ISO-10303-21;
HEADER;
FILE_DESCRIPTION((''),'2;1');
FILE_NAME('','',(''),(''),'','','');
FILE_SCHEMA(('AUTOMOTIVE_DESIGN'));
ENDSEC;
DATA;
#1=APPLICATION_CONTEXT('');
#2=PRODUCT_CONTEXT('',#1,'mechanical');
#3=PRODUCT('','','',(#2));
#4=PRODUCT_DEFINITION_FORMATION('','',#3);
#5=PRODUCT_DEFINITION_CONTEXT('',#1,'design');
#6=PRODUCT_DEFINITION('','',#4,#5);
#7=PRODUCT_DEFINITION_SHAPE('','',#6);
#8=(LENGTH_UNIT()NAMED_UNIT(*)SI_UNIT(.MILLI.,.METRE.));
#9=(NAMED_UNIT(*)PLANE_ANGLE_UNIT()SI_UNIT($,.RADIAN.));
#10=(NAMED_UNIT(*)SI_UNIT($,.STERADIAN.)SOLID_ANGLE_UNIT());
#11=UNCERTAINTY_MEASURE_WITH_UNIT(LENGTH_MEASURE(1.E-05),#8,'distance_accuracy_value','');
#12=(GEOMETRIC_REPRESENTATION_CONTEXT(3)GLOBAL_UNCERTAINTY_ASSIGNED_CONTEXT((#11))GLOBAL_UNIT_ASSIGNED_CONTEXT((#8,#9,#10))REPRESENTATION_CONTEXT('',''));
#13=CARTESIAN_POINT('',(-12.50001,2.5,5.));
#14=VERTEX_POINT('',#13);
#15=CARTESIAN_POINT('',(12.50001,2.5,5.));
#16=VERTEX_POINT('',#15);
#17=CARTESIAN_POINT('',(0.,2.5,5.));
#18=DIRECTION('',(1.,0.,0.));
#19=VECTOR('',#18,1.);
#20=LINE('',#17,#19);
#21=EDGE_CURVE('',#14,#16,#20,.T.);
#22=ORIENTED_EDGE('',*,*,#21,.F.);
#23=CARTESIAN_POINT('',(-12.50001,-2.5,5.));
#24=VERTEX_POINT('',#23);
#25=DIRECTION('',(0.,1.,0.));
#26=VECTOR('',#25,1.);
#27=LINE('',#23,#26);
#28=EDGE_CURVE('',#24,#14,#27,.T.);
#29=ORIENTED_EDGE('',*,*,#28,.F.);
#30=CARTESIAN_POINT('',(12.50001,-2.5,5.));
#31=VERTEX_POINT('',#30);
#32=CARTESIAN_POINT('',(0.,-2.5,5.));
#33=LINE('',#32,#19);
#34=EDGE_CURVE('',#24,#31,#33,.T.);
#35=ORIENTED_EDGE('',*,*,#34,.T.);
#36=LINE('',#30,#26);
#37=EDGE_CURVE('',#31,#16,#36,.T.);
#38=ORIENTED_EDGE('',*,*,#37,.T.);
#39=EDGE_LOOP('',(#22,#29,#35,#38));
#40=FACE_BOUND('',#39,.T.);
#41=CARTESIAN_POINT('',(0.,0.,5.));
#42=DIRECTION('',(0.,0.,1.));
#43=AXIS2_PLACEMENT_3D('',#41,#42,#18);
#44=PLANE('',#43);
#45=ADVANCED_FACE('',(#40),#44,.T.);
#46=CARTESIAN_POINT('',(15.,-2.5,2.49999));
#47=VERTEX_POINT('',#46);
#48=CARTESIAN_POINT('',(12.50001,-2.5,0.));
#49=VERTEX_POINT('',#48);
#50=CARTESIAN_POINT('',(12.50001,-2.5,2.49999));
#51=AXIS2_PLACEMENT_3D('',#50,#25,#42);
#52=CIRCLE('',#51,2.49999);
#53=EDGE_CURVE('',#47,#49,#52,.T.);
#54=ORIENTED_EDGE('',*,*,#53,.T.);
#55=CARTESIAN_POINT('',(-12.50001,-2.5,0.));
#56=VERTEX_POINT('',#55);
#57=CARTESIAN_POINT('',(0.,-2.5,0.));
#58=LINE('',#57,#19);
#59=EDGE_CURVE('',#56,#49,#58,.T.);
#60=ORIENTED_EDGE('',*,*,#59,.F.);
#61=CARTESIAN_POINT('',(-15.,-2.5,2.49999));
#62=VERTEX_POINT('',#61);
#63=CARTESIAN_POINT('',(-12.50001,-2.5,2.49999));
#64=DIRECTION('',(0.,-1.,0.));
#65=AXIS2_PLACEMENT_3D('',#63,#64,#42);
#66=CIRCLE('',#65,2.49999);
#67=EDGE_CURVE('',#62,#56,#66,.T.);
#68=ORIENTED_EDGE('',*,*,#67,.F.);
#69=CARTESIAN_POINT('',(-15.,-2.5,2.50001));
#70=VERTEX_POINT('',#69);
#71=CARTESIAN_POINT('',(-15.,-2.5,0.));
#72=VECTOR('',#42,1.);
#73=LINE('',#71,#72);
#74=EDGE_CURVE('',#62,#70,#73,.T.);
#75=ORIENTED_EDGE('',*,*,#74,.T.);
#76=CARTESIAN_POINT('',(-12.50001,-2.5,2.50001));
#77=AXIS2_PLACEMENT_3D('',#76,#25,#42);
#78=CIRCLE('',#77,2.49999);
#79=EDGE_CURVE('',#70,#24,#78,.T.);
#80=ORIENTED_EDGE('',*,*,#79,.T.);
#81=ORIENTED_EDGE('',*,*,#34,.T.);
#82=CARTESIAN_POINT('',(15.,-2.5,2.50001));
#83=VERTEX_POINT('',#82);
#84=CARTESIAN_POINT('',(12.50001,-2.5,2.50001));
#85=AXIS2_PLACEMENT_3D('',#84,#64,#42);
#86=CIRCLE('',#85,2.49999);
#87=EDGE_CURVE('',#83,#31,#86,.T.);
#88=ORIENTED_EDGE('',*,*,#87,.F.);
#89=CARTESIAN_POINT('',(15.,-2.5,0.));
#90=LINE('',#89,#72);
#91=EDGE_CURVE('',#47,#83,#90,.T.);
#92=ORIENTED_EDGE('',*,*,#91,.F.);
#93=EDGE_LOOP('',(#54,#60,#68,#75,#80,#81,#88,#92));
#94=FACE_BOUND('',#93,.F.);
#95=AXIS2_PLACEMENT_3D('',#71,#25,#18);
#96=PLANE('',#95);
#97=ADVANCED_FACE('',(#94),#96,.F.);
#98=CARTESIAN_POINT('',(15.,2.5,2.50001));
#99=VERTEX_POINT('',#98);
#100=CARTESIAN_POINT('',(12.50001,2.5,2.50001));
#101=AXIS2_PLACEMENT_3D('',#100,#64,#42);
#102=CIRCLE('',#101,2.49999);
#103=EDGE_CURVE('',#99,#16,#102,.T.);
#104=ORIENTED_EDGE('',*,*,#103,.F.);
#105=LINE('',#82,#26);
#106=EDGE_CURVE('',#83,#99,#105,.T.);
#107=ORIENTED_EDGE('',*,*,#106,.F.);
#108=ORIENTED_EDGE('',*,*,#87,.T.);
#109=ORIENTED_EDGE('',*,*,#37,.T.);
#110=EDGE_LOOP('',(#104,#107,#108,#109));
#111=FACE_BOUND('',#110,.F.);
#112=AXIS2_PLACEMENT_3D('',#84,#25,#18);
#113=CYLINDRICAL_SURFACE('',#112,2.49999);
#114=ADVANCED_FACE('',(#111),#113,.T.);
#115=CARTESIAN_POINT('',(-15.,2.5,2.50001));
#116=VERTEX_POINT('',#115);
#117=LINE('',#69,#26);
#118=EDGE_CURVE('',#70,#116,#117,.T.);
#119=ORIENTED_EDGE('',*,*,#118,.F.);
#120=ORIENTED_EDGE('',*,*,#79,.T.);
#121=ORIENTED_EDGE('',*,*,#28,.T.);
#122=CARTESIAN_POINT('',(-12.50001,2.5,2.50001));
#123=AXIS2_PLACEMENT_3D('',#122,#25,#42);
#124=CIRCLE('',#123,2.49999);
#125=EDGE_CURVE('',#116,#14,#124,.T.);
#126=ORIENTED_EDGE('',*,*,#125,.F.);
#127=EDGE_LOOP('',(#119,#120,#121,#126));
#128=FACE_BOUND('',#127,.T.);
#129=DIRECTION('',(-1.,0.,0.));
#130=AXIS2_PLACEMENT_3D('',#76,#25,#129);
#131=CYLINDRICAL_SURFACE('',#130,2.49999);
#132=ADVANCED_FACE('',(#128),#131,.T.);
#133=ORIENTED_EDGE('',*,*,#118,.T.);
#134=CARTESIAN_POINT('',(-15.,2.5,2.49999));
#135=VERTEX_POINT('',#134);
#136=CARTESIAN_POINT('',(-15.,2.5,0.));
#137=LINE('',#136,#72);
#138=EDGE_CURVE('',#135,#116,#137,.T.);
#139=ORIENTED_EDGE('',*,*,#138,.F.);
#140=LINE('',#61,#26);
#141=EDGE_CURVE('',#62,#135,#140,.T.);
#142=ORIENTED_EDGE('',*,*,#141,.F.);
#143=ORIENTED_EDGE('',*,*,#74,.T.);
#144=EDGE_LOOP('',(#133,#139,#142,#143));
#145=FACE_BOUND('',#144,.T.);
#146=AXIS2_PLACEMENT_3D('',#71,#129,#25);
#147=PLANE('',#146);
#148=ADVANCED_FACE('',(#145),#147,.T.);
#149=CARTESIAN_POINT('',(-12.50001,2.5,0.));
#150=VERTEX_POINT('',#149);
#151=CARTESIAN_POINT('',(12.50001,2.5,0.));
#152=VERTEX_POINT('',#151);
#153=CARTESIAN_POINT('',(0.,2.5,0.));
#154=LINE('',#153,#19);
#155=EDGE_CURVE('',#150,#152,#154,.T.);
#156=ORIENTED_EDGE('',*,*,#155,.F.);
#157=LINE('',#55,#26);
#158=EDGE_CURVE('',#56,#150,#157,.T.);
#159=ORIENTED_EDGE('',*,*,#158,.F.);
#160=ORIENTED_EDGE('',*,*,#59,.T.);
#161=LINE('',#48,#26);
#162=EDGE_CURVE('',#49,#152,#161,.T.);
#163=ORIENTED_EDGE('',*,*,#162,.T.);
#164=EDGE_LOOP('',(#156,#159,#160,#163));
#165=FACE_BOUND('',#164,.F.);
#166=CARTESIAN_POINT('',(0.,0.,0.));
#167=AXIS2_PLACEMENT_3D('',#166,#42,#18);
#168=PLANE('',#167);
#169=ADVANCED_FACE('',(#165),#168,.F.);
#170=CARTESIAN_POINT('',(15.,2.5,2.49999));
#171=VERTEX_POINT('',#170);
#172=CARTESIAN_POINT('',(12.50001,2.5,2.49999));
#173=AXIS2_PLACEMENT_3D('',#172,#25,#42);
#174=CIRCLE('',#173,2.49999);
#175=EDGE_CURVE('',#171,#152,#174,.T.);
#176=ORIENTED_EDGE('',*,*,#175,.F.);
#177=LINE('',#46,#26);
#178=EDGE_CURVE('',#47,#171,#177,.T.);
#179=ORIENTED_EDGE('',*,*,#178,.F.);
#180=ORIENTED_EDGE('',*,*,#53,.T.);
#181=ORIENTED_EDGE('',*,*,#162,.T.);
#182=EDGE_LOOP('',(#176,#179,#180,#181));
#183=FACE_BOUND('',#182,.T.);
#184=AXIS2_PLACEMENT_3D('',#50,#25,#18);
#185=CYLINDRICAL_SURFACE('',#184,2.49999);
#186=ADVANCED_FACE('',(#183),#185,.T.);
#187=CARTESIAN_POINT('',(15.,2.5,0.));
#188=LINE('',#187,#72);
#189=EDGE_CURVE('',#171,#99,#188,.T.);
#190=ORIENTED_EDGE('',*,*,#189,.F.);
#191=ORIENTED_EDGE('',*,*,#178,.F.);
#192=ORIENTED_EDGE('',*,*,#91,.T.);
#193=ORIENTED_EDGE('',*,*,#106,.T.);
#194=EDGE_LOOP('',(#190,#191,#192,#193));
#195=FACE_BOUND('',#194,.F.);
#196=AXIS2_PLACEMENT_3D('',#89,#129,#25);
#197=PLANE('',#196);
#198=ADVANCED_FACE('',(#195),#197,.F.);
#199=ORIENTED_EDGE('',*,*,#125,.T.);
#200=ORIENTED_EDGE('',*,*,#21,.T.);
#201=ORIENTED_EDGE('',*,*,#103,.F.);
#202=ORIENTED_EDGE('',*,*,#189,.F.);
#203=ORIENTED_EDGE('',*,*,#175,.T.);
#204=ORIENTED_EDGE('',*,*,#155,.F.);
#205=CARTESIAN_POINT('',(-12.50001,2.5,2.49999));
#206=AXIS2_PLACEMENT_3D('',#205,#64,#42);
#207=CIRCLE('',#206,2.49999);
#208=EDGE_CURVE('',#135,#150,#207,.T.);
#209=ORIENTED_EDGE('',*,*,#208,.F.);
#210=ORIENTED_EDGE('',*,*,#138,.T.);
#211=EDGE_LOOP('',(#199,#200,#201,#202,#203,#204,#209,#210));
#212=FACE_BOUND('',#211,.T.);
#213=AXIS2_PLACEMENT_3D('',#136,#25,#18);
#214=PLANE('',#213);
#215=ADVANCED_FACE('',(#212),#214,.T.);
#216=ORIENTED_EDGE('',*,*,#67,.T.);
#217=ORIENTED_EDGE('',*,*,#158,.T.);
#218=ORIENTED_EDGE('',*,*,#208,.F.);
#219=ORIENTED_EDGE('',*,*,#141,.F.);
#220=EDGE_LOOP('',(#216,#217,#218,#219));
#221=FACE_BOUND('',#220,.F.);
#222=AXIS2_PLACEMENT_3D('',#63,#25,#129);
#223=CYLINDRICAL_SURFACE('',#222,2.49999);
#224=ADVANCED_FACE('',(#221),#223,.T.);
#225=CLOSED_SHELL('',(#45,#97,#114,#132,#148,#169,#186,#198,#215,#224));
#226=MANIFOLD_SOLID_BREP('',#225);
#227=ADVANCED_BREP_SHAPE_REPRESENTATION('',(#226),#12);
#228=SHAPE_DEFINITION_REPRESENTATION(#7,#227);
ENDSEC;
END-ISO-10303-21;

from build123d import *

# Parameters (mm, degrees)
F0_W     = 30
F0_H     = 5
F1_DEPTH = 5
F2_R     = 2.49999


# Not quite as in the source:
# - a fillet or chamfer is up to 0.001 mm smaller than in the source, because OpenCascade refuses the exact size


with BuildPart() as f1:
    # F0 (on Top) → F1 (new body)
    with BuildSketch(Plane.XY):
        Rectangle(F0_W, F0_H)
    extrude(amount=F1_DEPTH)

    # F2 (radius 2.5 in the source; OpenCascade refuses exactly that, so slightly less here)
    f2_edges = [f1.edges().sort_by_distance(p)[0] for p in [
        (-15, 0, 5),
        (-15, 0, 0),
        (15, 0, 5),
        (15, 0, 0),
    ]]
    fillet(f2_edges, radius=F2_R)


solid = f1.part
